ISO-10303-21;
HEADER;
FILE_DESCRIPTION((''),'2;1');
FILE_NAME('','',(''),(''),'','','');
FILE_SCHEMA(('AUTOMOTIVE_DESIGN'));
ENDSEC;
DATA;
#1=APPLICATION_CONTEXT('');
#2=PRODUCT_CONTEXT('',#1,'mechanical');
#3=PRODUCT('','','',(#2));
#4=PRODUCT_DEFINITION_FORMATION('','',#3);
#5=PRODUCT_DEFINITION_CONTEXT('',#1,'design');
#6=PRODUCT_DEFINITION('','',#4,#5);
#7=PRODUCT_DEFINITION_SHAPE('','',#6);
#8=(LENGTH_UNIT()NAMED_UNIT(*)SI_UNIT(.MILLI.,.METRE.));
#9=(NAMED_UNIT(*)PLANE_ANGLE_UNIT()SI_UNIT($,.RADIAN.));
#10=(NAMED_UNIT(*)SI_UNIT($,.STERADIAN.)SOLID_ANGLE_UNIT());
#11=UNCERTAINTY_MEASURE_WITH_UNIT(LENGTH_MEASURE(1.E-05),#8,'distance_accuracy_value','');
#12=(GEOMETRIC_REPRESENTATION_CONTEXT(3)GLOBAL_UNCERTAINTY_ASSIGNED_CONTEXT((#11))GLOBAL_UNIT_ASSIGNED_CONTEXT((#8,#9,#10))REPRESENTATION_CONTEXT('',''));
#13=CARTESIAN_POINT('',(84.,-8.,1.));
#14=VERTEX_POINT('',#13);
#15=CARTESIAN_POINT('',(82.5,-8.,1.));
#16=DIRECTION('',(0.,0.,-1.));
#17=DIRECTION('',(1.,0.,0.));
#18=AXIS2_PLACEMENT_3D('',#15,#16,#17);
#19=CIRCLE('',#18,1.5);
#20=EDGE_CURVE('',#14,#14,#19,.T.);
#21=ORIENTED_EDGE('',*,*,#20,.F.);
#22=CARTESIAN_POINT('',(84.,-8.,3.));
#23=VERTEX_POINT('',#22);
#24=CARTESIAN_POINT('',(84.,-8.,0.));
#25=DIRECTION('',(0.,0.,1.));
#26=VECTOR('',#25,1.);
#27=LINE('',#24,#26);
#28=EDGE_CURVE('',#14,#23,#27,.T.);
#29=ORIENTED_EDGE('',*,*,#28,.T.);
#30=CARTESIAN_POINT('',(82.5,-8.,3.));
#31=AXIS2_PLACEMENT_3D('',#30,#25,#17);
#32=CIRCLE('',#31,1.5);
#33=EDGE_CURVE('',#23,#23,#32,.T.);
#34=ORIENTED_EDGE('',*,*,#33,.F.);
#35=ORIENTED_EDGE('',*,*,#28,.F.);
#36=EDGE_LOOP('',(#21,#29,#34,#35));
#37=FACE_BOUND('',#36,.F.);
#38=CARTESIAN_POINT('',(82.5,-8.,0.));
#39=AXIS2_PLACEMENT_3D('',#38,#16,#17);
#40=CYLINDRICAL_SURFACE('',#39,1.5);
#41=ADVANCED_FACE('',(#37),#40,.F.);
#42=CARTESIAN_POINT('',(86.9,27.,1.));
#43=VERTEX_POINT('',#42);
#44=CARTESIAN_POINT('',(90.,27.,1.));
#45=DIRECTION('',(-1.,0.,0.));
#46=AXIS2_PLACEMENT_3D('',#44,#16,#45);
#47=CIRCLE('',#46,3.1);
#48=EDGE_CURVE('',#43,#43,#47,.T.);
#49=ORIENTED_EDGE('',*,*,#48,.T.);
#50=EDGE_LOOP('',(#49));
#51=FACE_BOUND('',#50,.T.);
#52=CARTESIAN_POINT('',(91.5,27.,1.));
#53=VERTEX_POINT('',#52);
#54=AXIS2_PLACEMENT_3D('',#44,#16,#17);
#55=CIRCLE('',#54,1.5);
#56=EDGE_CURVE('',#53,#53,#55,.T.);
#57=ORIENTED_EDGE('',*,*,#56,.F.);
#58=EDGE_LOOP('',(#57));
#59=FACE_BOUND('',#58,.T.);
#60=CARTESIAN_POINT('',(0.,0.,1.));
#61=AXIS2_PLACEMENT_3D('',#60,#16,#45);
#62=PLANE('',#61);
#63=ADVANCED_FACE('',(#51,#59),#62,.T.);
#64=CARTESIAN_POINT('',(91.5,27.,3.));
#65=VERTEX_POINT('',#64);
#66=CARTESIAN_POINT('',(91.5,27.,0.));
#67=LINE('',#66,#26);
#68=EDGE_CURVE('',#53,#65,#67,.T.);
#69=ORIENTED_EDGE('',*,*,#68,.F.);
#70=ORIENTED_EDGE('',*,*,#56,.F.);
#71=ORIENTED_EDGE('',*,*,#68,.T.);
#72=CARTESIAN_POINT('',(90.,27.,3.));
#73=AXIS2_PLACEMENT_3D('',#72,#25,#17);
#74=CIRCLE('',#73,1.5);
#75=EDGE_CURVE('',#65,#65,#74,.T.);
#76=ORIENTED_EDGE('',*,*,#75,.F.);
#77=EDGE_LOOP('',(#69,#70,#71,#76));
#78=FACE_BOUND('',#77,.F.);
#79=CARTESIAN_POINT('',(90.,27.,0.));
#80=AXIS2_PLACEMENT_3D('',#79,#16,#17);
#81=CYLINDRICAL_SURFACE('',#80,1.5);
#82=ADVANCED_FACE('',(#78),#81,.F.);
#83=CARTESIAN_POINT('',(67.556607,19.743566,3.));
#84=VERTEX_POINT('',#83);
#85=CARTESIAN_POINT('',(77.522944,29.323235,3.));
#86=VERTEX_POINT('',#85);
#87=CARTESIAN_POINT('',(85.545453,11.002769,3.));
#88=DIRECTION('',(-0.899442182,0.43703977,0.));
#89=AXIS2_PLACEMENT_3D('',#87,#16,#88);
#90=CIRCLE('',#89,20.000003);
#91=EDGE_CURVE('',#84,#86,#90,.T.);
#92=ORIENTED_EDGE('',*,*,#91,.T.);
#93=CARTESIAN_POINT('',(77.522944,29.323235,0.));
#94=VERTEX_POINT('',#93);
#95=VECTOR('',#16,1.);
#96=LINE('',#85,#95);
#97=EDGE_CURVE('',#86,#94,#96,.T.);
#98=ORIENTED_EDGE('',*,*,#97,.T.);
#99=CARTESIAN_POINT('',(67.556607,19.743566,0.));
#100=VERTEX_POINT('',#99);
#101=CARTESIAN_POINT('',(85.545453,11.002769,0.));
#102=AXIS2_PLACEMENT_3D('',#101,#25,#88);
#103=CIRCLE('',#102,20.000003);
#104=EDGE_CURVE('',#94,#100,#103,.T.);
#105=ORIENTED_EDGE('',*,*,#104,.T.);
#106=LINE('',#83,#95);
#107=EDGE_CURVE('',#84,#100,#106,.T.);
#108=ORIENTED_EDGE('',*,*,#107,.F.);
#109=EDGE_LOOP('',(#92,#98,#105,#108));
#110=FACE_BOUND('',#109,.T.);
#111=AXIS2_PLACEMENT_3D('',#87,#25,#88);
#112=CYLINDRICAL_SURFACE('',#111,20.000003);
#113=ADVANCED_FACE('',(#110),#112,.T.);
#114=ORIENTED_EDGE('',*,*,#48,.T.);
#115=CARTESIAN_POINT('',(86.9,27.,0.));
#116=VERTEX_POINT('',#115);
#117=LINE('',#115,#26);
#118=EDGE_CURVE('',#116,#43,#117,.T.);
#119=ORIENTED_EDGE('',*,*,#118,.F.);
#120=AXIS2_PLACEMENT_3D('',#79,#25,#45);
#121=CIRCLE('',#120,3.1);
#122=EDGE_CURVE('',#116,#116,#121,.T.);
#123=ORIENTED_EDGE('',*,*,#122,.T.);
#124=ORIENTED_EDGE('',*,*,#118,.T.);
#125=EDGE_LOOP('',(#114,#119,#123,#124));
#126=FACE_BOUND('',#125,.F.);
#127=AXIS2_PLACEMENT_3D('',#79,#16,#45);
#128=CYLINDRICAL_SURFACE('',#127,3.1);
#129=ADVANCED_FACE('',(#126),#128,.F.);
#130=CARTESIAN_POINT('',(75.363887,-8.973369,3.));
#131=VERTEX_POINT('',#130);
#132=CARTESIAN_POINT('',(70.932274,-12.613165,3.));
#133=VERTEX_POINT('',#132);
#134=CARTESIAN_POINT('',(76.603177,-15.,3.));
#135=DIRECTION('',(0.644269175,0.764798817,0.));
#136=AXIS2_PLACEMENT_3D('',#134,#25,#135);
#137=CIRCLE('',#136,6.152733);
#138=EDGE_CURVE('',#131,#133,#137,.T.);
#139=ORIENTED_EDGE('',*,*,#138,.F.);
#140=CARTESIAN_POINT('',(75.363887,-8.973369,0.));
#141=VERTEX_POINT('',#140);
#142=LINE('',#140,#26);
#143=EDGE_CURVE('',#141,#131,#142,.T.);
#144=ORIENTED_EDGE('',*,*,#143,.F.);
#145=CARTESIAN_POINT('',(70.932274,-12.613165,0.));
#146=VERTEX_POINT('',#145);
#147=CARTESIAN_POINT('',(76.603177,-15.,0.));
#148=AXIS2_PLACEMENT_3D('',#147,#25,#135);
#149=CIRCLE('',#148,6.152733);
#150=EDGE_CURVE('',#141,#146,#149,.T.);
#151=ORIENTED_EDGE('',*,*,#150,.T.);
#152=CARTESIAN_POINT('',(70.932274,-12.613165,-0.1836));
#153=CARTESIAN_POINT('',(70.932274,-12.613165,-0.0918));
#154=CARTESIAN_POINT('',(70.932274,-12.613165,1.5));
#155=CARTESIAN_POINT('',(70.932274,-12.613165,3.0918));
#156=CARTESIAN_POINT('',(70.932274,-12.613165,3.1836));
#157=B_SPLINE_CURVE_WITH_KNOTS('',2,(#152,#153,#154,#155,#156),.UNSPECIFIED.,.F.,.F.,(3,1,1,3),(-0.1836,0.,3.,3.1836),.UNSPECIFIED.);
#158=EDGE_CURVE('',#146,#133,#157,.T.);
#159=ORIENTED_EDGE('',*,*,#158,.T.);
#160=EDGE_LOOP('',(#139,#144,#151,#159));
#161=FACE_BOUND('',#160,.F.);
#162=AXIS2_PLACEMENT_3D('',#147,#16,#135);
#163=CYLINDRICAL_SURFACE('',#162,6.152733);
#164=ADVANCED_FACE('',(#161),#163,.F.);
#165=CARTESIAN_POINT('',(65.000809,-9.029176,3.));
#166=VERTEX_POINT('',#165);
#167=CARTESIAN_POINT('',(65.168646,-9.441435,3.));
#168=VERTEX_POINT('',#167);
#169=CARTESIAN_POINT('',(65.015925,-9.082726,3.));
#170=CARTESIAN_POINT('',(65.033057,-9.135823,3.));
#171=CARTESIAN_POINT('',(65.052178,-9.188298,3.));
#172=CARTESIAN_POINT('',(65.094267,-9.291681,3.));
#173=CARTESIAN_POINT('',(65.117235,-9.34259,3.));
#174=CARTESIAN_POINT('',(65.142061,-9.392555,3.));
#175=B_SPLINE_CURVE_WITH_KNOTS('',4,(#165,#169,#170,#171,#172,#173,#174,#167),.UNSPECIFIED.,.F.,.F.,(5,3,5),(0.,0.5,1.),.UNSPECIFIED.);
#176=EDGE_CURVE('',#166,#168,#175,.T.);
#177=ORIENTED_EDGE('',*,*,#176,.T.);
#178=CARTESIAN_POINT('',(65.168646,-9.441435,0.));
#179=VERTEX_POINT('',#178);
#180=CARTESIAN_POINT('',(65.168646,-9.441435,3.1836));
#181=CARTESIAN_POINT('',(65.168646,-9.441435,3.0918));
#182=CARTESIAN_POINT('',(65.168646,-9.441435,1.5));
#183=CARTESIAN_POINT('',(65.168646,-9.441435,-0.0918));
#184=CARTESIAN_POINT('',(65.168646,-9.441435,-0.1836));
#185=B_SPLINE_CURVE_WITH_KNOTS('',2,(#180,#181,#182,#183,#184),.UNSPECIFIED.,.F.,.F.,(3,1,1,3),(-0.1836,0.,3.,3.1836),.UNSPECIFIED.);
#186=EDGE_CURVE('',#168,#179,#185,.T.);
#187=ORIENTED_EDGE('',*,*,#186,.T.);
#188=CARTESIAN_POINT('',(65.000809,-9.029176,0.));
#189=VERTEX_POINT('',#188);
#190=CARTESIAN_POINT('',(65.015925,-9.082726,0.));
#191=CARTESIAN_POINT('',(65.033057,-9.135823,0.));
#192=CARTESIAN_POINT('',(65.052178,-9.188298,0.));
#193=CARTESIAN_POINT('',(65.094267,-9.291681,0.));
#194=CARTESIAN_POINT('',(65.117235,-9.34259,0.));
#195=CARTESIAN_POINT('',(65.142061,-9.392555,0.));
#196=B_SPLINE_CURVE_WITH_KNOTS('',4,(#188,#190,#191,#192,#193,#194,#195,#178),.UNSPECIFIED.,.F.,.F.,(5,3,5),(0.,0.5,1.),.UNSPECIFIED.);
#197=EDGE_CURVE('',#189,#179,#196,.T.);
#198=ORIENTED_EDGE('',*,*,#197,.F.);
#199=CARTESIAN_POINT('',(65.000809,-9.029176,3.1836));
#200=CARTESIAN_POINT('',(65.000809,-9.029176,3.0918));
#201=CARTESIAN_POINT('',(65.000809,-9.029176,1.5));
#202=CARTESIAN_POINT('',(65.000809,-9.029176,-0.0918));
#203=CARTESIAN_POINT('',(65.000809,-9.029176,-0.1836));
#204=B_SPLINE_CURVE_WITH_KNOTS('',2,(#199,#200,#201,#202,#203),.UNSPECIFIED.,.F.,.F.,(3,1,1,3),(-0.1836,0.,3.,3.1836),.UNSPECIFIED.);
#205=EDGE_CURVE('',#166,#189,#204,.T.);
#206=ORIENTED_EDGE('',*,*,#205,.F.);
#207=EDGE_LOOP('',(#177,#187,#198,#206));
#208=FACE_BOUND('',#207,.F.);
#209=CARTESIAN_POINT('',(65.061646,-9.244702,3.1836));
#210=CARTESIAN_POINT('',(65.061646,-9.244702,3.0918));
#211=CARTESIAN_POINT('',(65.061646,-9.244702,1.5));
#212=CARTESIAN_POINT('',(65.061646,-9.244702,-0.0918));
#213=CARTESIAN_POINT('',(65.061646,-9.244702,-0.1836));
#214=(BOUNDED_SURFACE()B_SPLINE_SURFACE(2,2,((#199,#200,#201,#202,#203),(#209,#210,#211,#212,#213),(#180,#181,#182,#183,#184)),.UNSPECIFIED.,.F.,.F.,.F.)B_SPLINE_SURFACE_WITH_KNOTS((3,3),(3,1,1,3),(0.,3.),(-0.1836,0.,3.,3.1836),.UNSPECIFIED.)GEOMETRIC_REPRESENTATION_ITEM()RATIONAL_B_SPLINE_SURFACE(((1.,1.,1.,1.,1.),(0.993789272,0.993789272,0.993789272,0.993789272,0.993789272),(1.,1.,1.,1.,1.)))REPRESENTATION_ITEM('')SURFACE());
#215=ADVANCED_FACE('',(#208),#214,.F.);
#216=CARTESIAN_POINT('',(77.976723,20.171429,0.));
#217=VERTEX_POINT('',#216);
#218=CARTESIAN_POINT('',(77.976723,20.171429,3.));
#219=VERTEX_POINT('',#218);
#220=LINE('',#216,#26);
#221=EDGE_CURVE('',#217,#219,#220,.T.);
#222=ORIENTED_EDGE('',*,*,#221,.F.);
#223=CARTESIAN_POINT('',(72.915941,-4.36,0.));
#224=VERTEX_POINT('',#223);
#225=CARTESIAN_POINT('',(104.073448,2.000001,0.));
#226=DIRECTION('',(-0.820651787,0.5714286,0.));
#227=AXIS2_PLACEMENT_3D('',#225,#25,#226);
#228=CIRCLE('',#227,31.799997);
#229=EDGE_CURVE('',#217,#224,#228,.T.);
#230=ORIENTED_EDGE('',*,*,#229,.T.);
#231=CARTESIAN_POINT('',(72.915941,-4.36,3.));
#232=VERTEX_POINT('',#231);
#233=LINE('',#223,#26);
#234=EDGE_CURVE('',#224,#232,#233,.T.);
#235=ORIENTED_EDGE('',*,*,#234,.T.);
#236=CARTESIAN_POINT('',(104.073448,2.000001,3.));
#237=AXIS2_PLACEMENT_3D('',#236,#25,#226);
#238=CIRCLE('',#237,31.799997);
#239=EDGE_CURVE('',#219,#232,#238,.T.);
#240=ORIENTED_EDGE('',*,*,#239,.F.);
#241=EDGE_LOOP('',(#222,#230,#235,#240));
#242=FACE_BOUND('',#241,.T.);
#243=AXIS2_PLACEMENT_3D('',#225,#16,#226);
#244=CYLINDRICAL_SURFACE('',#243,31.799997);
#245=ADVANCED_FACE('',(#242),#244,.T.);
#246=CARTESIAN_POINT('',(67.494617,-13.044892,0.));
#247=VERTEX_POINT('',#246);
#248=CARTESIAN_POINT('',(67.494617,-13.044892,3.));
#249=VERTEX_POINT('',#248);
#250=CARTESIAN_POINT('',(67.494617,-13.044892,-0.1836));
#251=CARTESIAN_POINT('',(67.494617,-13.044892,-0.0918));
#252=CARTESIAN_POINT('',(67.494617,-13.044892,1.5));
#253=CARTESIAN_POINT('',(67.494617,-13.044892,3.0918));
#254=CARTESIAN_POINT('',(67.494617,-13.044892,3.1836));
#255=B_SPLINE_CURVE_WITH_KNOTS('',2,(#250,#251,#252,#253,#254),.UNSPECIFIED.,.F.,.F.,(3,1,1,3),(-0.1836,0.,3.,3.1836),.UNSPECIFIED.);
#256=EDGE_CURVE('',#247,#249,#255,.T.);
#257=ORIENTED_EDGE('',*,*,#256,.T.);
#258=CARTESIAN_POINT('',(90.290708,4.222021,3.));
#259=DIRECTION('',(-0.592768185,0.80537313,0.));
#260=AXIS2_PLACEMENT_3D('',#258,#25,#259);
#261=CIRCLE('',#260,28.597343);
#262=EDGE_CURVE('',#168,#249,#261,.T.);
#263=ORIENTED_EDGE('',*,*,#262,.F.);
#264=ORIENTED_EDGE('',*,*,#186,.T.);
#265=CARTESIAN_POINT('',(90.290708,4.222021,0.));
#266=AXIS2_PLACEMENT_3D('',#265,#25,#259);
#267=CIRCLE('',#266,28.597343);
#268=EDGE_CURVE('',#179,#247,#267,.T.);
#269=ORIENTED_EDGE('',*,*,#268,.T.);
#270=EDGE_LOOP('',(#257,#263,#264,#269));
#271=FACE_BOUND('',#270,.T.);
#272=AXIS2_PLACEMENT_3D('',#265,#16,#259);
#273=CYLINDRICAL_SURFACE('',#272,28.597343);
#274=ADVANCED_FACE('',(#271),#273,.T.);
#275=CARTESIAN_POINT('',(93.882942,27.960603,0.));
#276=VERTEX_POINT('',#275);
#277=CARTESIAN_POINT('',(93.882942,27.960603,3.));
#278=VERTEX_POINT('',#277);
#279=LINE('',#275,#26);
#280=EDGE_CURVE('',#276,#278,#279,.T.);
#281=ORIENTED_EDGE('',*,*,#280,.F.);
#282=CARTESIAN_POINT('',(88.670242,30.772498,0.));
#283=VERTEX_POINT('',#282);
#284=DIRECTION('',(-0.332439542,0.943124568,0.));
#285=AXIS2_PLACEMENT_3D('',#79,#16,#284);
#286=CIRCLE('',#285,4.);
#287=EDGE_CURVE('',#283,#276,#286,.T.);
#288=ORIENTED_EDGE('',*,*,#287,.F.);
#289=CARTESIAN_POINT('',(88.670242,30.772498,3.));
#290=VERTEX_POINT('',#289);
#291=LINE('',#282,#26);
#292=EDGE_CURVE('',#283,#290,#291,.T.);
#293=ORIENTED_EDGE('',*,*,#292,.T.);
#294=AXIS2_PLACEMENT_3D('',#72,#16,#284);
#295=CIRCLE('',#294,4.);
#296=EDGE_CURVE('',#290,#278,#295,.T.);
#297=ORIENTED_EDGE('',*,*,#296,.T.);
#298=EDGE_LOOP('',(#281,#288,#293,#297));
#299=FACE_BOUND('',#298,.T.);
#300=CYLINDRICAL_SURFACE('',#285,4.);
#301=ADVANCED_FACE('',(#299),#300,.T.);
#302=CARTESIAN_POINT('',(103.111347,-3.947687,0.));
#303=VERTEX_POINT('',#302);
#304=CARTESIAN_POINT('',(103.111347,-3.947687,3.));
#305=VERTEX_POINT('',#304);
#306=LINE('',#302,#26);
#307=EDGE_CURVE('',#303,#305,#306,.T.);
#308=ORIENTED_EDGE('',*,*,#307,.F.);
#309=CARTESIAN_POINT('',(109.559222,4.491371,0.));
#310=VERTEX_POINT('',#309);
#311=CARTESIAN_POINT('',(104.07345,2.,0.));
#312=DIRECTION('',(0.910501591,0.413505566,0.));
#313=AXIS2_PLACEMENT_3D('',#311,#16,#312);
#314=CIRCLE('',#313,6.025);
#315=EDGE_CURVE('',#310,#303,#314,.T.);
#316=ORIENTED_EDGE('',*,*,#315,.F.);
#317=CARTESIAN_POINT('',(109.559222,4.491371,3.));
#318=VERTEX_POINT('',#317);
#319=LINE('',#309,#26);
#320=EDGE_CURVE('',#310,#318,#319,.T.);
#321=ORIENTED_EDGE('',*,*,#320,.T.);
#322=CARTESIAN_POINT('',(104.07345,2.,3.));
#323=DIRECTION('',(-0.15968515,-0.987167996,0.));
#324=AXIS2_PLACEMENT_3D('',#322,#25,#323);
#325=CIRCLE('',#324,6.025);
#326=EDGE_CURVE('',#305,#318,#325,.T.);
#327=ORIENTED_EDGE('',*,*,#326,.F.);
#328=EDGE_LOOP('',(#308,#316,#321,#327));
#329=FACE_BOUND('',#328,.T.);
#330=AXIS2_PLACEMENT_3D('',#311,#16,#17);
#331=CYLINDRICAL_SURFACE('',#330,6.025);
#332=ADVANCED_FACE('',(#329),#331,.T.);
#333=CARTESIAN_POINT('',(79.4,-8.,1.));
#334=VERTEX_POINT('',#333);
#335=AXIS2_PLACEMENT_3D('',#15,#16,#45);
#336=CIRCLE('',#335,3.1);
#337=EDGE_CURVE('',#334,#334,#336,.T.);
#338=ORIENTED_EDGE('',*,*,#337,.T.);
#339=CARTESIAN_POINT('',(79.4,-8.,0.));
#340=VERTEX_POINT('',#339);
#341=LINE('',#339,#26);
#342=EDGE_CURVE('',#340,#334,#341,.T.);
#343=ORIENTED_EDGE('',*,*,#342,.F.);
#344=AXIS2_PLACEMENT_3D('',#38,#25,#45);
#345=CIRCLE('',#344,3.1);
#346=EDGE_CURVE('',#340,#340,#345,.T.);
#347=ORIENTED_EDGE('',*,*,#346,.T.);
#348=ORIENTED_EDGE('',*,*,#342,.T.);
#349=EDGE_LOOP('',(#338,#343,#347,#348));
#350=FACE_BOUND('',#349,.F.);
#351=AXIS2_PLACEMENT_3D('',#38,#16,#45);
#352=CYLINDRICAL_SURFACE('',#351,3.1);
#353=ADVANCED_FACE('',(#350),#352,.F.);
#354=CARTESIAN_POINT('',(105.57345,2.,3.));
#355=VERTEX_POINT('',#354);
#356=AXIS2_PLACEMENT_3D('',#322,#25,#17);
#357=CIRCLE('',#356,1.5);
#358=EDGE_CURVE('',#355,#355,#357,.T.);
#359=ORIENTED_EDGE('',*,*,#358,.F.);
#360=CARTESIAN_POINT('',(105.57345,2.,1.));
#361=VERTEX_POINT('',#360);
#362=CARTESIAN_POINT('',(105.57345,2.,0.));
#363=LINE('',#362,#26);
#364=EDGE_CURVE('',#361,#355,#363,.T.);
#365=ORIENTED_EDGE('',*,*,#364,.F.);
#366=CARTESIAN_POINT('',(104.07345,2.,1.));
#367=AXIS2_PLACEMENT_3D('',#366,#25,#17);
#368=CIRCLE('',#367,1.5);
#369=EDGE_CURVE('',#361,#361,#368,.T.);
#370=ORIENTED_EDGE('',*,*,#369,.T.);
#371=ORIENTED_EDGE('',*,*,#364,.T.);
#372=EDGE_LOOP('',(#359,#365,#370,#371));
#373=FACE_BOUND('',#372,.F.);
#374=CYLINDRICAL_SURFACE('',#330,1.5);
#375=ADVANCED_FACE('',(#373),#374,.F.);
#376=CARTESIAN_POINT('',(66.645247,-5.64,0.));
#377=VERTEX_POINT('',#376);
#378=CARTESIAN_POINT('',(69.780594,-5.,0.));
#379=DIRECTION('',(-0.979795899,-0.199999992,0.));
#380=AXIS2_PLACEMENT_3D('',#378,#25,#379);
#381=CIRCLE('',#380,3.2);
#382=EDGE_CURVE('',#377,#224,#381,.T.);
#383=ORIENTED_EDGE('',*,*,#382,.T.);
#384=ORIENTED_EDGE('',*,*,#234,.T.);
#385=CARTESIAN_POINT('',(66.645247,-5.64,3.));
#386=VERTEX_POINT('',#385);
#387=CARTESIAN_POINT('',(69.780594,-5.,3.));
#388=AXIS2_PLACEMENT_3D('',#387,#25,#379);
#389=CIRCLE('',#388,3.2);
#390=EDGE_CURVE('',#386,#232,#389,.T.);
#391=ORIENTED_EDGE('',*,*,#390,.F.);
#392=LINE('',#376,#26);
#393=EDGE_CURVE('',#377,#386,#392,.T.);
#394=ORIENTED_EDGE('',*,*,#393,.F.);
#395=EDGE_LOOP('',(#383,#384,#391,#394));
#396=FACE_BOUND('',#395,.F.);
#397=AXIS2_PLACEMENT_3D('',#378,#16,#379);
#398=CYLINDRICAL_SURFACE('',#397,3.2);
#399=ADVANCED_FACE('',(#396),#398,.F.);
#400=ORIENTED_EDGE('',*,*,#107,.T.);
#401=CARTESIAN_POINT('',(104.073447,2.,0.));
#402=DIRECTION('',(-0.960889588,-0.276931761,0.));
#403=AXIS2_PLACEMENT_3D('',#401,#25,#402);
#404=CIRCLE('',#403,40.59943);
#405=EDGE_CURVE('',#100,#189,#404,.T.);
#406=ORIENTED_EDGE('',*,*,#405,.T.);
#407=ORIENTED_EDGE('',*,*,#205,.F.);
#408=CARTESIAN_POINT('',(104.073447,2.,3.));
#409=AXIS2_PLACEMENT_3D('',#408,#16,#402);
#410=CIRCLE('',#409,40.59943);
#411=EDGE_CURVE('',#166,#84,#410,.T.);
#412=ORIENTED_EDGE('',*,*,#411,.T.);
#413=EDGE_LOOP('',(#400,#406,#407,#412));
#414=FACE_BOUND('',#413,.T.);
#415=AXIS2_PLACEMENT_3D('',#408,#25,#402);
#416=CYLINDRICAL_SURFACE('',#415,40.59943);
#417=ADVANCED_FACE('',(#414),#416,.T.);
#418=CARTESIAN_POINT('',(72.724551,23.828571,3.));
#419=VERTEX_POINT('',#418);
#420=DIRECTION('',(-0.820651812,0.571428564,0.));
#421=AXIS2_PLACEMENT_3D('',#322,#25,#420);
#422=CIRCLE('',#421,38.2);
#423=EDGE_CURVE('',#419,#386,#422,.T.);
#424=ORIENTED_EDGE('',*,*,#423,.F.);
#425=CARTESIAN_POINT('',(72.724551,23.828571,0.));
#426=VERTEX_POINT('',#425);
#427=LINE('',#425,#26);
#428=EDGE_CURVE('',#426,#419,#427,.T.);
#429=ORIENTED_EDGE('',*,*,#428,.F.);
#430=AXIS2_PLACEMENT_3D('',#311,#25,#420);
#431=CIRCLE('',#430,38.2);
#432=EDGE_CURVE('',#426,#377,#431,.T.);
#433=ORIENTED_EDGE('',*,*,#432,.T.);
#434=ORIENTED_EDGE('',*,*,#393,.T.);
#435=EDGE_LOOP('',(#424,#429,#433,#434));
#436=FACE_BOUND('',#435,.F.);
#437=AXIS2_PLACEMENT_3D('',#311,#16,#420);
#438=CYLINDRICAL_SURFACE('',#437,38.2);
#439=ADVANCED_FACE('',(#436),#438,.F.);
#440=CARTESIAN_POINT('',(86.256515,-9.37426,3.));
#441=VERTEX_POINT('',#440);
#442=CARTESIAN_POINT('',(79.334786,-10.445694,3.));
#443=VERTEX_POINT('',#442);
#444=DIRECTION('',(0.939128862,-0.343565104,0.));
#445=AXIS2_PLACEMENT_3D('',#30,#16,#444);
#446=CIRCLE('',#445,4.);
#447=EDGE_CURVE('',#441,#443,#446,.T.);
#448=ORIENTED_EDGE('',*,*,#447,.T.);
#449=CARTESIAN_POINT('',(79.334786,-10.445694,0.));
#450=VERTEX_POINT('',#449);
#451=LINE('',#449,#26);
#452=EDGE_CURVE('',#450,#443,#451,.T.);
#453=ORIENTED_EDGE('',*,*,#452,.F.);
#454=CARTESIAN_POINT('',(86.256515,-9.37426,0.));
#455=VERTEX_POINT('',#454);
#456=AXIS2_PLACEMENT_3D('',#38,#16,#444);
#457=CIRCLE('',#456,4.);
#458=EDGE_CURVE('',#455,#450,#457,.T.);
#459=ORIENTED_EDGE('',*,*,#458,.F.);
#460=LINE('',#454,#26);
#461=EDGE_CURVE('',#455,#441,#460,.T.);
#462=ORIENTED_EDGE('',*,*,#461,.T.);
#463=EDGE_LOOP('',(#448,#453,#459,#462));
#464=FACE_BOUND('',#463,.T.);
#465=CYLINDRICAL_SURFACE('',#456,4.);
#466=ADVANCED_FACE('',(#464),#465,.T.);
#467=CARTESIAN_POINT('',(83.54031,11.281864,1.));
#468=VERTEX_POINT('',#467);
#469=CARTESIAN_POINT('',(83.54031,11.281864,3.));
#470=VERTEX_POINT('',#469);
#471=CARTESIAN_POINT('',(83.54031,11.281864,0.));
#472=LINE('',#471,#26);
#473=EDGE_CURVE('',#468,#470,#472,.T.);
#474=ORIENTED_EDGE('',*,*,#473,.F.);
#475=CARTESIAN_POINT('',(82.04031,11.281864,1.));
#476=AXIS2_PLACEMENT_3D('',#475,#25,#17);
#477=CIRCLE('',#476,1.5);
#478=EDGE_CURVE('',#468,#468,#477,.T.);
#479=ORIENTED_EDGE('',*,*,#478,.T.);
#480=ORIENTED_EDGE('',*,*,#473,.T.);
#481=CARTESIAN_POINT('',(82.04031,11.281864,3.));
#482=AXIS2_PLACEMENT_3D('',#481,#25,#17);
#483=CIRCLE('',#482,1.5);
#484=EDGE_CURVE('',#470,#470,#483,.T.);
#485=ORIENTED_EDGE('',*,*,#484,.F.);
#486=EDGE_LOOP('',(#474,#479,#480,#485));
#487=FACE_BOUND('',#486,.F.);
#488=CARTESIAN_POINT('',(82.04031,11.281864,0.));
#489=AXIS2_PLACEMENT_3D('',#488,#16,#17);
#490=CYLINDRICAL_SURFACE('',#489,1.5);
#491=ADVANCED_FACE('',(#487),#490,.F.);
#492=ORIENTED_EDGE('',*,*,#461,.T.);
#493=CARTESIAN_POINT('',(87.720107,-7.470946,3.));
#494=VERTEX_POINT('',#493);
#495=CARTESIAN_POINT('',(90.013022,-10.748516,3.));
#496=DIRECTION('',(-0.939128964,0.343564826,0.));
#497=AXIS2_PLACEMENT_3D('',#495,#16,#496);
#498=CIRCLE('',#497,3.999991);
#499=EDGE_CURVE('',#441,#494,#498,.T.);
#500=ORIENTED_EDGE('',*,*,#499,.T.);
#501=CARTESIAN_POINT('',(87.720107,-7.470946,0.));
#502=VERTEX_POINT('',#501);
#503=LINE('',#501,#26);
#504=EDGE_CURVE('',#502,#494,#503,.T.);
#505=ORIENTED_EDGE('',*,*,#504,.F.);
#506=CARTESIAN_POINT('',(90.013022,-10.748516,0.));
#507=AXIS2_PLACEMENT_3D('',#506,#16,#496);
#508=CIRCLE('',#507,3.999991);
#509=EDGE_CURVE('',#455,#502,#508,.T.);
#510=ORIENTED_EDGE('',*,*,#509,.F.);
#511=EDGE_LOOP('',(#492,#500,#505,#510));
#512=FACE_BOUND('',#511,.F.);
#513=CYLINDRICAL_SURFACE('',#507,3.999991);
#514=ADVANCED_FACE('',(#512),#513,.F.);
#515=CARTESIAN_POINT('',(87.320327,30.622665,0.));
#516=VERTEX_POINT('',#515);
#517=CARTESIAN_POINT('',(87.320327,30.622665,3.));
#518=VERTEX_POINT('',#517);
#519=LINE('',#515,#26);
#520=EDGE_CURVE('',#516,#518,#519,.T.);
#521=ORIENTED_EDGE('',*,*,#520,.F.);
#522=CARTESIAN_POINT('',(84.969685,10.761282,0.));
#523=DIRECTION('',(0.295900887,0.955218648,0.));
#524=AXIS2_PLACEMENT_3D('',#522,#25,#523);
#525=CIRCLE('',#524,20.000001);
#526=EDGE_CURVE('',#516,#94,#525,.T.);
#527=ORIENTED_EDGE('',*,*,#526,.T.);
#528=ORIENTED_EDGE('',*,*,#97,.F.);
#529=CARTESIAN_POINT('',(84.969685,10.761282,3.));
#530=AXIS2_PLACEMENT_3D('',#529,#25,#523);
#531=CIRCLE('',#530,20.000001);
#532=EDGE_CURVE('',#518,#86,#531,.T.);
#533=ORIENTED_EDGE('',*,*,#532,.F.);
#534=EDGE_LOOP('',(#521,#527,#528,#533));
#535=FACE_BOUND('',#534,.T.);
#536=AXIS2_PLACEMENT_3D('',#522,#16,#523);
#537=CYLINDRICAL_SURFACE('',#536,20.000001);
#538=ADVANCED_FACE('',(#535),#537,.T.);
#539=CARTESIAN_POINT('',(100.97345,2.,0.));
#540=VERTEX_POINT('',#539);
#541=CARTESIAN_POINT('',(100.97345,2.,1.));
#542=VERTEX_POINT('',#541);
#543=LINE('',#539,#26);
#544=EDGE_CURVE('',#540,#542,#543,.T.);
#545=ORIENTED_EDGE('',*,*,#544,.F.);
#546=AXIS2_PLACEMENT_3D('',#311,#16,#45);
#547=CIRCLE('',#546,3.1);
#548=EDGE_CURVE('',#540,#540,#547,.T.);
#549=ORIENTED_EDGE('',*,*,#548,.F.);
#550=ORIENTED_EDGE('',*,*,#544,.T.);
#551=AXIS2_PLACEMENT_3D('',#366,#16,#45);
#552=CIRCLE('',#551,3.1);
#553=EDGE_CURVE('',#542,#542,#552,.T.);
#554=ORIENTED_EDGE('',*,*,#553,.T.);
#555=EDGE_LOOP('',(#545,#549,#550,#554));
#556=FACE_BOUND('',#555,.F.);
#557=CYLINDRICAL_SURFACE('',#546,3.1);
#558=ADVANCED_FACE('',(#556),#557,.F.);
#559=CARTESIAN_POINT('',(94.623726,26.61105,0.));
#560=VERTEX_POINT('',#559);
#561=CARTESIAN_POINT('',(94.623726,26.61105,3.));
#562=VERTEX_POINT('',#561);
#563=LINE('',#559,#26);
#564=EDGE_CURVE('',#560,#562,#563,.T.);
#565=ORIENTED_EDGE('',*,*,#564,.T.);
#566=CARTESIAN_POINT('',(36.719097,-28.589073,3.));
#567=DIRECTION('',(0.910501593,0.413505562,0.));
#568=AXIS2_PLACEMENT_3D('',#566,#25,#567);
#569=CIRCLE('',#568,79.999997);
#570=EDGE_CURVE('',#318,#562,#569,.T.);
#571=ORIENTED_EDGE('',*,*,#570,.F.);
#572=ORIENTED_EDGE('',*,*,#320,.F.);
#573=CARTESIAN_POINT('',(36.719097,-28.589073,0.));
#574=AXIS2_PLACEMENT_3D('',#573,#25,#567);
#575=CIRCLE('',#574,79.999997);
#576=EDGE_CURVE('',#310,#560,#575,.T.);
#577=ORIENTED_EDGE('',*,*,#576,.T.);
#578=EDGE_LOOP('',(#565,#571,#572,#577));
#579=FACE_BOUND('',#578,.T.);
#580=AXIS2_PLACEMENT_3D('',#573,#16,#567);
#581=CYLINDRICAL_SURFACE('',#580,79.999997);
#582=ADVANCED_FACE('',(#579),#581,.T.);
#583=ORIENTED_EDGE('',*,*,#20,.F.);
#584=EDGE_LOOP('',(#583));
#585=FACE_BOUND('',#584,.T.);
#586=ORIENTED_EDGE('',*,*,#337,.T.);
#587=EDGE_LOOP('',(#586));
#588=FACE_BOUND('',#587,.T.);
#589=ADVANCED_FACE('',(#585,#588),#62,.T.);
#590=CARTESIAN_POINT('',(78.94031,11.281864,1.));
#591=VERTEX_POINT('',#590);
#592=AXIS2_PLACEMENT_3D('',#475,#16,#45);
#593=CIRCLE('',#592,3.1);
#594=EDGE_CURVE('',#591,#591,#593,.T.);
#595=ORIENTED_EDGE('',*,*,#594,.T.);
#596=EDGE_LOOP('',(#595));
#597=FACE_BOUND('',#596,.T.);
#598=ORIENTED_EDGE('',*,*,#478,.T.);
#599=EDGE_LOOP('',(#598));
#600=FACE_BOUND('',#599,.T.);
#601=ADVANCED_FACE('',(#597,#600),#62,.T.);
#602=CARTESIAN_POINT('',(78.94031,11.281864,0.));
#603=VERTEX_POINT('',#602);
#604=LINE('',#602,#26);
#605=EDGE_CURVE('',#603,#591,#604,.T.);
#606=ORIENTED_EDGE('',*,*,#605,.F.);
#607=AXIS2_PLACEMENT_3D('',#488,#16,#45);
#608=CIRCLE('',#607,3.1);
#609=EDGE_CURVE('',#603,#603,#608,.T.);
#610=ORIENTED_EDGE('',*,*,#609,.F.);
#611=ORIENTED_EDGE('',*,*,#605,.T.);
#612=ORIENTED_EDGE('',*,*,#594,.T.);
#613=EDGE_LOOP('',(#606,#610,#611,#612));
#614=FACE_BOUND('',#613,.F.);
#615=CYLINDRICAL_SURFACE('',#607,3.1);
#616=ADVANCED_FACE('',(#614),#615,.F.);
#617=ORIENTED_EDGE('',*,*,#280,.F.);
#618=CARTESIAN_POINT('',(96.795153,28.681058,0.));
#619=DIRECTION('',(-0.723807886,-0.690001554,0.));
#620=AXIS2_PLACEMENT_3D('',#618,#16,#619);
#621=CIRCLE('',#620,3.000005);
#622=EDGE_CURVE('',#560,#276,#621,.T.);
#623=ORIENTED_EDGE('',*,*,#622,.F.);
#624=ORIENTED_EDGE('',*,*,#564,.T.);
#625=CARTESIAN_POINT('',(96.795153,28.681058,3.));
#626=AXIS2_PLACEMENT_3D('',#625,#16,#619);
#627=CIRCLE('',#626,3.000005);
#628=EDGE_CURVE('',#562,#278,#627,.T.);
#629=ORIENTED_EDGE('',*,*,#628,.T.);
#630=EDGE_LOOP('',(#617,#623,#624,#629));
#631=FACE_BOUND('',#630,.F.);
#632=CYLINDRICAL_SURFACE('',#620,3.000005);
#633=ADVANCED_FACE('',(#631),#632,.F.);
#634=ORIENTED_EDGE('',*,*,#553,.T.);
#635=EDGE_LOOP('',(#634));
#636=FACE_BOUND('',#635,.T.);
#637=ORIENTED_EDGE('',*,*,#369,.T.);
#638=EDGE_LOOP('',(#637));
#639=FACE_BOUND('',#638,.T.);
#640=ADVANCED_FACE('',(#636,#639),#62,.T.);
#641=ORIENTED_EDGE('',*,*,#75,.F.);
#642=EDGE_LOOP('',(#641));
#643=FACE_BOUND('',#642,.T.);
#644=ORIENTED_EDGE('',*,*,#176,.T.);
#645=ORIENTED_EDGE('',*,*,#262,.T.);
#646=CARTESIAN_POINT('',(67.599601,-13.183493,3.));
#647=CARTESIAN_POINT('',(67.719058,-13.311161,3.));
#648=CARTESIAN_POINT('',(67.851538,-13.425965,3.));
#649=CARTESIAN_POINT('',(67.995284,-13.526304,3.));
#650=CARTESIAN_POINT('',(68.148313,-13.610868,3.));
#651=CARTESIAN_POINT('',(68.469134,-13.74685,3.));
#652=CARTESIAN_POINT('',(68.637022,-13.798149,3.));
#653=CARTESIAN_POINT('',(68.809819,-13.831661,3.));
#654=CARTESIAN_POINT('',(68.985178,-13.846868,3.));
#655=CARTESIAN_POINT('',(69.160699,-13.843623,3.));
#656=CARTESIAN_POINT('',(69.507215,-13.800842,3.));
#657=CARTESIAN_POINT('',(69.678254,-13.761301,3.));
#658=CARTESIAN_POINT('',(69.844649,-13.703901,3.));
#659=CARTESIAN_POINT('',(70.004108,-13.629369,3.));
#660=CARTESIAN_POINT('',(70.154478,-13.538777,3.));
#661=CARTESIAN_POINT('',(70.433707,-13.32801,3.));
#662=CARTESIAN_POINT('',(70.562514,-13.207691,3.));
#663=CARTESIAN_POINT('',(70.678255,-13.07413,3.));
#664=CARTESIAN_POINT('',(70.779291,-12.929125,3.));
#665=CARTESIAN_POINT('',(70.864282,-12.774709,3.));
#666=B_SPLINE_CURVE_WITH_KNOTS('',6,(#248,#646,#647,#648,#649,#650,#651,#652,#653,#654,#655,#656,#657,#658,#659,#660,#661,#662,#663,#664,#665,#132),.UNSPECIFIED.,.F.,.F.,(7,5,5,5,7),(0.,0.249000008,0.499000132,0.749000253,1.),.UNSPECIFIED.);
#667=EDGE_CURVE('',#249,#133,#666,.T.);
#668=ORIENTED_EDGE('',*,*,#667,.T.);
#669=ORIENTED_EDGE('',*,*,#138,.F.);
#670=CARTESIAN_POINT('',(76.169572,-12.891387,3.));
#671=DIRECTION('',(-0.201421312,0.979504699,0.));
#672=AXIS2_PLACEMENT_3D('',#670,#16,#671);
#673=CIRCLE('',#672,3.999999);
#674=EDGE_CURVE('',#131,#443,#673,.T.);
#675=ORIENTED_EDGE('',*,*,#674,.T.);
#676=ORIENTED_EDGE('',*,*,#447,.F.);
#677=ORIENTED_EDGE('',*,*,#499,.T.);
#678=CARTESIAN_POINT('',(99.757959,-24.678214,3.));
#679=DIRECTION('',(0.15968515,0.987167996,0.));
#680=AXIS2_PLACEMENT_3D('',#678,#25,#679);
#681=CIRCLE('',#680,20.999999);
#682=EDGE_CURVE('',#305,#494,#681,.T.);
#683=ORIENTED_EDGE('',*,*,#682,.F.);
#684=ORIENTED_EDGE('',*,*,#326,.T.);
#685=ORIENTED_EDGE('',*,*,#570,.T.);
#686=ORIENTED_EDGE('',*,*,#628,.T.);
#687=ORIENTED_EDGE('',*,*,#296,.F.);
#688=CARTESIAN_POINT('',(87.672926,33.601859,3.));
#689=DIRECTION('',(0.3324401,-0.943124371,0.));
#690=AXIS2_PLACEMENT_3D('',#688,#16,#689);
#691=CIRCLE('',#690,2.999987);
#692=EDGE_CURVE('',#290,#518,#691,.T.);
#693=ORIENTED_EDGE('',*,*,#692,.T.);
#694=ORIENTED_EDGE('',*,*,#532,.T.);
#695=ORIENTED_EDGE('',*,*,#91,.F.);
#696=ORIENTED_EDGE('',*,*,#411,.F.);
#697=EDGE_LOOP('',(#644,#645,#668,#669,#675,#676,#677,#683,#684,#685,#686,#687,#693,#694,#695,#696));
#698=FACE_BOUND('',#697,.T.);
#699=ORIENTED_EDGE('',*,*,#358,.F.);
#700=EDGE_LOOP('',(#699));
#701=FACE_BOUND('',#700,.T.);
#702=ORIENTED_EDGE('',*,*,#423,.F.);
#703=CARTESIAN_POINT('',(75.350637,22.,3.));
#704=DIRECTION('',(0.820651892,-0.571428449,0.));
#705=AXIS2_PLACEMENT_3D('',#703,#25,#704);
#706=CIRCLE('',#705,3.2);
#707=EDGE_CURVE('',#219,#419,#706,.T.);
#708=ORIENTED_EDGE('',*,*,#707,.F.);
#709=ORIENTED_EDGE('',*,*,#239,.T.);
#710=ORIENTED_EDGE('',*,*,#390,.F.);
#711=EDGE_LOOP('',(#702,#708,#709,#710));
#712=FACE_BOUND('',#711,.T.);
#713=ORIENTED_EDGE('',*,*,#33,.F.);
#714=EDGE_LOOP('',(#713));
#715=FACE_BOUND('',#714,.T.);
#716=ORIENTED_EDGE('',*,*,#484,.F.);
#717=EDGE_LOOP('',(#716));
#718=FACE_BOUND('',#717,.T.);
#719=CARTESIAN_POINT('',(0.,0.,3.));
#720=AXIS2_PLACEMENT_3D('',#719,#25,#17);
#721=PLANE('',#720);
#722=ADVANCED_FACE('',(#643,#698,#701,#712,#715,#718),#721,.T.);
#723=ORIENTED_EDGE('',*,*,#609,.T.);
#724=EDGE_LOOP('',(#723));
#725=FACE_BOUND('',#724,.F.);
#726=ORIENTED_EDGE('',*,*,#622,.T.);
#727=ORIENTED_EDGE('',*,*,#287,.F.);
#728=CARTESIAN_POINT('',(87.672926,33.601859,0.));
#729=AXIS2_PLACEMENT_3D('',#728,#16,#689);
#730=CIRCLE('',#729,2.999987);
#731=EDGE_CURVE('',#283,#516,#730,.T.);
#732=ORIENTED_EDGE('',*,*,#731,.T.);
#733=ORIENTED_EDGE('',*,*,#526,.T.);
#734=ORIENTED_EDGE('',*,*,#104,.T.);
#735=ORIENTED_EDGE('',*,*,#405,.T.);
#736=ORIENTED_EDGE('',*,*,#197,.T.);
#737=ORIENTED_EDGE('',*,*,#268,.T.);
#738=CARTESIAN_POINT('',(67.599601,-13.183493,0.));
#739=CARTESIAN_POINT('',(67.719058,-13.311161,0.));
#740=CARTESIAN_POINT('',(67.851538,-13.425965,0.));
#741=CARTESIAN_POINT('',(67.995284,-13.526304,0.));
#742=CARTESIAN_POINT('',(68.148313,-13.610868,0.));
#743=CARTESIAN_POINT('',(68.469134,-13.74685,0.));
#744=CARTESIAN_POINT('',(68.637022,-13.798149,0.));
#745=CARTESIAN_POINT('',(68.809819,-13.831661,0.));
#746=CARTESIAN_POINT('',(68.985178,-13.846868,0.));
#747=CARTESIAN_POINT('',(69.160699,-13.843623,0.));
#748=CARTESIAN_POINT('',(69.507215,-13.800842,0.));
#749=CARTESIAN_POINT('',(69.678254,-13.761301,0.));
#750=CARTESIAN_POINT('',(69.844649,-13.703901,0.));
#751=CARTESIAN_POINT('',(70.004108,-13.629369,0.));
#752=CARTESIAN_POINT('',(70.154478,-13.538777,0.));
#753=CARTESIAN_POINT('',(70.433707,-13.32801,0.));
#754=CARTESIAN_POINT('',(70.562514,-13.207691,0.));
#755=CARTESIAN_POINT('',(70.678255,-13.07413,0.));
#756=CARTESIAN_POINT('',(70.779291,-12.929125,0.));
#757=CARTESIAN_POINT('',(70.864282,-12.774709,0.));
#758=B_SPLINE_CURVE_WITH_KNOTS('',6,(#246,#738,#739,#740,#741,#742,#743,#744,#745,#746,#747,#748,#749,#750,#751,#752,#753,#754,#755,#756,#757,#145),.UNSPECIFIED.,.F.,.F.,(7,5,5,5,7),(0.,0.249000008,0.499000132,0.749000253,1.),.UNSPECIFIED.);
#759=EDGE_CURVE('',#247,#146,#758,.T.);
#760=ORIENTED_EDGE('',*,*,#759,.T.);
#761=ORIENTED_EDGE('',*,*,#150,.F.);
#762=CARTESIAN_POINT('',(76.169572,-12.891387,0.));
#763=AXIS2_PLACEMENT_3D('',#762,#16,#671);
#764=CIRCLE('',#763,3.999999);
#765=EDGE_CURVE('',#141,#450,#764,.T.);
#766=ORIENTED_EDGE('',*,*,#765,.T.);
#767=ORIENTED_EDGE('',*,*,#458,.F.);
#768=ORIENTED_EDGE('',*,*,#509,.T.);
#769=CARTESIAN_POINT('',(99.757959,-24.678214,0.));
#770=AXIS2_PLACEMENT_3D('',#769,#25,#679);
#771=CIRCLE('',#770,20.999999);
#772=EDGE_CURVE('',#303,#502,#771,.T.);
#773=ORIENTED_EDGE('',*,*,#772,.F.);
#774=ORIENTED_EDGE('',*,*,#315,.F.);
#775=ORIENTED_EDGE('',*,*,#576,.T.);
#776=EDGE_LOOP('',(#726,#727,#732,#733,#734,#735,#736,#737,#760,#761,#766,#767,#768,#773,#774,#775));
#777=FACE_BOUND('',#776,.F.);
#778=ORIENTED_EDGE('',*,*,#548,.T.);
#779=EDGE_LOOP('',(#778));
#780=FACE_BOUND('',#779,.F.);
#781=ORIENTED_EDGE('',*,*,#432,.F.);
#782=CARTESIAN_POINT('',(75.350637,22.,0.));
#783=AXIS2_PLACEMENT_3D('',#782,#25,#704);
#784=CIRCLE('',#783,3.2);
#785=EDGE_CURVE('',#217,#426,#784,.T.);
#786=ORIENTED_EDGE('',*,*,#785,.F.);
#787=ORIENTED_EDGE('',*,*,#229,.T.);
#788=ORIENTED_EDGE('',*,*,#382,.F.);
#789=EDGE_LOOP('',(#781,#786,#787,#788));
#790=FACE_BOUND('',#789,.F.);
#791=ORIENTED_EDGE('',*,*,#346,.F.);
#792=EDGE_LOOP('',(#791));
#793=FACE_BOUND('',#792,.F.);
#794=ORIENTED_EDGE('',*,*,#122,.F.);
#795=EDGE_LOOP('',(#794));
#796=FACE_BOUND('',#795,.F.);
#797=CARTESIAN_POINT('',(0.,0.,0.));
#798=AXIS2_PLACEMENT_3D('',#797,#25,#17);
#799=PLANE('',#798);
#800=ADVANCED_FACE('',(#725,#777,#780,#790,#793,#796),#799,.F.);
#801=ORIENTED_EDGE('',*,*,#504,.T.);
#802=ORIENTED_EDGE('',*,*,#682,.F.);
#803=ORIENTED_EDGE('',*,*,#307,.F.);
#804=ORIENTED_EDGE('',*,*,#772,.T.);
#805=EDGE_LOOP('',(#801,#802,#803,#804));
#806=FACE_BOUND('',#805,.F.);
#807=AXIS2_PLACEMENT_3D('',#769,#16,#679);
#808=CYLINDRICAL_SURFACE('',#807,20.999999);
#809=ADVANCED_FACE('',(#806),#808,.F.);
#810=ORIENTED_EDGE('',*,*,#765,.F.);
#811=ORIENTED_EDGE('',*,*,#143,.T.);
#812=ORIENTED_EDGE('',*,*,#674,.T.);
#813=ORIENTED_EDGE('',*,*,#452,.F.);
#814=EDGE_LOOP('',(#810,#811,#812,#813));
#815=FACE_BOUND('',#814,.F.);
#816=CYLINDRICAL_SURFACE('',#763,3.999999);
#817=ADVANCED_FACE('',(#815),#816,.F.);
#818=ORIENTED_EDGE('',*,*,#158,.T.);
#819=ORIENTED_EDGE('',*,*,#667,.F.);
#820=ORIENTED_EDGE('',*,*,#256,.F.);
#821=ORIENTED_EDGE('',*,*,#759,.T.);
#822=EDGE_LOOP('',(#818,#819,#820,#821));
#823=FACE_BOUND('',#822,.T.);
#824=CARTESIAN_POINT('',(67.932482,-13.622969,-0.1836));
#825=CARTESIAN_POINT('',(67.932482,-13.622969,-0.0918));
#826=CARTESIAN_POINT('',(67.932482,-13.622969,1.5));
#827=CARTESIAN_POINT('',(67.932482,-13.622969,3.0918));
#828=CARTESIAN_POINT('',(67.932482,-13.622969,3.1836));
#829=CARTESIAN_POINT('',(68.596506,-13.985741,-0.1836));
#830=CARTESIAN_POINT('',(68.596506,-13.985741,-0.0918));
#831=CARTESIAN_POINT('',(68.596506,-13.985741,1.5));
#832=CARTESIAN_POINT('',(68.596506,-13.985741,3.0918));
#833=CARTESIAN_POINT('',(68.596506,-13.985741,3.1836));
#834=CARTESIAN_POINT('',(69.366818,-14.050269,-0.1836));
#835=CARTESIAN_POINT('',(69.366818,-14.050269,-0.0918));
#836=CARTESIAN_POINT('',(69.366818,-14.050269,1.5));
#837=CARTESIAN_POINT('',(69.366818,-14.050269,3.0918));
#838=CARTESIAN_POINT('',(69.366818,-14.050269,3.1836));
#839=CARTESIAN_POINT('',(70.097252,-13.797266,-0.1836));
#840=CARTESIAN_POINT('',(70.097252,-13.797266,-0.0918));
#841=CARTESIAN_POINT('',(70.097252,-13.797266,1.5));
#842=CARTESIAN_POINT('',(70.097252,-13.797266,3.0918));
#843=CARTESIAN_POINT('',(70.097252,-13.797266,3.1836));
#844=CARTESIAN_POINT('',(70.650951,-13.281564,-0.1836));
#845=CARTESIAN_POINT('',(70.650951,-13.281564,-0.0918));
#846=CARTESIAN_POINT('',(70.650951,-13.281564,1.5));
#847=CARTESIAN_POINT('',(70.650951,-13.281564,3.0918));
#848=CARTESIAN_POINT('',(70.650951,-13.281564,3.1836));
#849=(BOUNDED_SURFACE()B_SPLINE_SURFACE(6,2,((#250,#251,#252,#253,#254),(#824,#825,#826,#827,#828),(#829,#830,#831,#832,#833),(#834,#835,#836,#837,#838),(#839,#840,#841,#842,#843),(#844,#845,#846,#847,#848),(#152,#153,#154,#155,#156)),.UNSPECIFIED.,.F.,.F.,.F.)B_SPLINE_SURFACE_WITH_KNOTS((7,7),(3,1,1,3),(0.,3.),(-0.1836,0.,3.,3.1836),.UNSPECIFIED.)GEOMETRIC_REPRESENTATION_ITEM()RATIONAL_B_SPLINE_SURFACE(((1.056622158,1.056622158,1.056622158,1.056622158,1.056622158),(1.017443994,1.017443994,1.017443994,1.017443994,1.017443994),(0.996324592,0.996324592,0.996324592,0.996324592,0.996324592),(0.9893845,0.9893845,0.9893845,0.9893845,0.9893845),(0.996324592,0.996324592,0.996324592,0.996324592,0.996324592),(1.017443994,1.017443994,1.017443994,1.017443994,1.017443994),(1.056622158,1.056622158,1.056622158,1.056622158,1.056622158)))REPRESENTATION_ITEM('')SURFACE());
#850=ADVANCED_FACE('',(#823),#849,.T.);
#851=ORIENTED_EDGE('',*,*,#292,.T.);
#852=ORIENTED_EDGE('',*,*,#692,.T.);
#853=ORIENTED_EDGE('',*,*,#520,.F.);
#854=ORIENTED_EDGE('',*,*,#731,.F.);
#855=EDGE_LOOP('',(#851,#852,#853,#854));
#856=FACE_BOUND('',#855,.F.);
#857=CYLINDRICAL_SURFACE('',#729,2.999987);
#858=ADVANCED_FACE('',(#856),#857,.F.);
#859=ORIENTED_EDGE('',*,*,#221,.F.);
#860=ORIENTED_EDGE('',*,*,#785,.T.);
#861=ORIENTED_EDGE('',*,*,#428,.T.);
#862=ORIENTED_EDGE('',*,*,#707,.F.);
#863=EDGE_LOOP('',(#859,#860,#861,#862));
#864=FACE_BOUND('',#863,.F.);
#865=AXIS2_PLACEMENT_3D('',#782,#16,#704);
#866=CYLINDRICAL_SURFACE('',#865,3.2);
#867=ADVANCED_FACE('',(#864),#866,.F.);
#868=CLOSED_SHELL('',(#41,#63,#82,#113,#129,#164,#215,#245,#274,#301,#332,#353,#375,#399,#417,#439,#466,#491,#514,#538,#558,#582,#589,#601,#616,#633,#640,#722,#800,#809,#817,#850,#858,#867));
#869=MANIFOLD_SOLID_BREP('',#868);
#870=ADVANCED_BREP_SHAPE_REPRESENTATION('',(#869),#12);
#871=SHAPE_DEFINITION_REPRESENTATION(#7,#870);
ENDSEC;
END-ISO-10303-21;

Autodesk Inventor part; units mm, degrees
ref_plane "YZ Plane" through (0, 0, 0) normal (1, 0, 0) x (0, 1, 0)
ref_plane "XZ Plane" through (0, 0, 0) normal (0, 1, 0) x (-1, 0, 0)
ref_plane "XY Plane" through (0, 0, 0) normal (0, 0, 1) x (1, 0, 0)
sketch "スケッチ1" plane through (0, 0, 0) normal (0, 0, 1) x (1, 0, 0)
  line L0 (108, 72.831817) -> (108, -27.637331) construction
  circle A0 centre (90, 27) radius 3
  circle A1 centre (104.07345, 2) radius 6.025
  circle A2 centre (90, 27) radius 1.5
  circle A3 centre (104.07345, 2) radius 1.5
  circle A4 centre (82.04031, 11.281864) radius 1.5
  circle A5 centre (82.5, -8) radius 3
  circle A6 centre (82.5, -8) radius 1.5
  arc A7 (66.645247, -5.64) -> (72.915941, -4.36) centre (69.780594, -5) ccw
  arc A8 (72.724551, 23.828571) -> (66.645247, -5.64) centre (104.07345, 2) ccw
  arc A9 (77.976723, 20.171429) -> (72.915941, -4.36) centre (104.07345, 2) ccw
  arc A10 (77.976723, 20.171429) -> (72.724551, 23.828571) centre (75.350637, 22) ccw
  circle A11 centre (137.322151, 20) radius 1.25
  circle A12 centre (133.5, -8) radius 3
  circle A13 centre (133.5, -8) radius 1.5
  circle A14 centre (146, 10) radius 1.5
  arc A15 (-6.089587, 13.373015) -> (73.990447, 1.93301) centre (42.288654, 66.020578) ccw construction
  line L1 (108, 72.831817) -> (108, -27.637331) construction
  arc A16 (142.009553, 1.93301) -> (222.089587, 13.373015) centre (173.711346, 66.020578) ccw construction
  arc A17 (142.29705, -19.072921) -> (142.660887, 27.253552) centre (125.709293, 4.222021) ccw
  arc A18 (136.80781, 35.127338) -> (180.06622, 10.718677) centre (180.861669, 62.665248) ccw
  circle A19 centre (137.322151, 20) radius 9.006449
  arc A20 (128.322651, 20.353731) -> (130.555913, -8.5765) centre (253.226204, 15.444317) ccw
  arc A21 (133.414591, -10.998784) -> (152.948723, -4.485529) centre (134.268683, 18.989056) ccw
  arc A22 (35.93378, 10.718677) -> (79.19219, 35.127338) centre (35.138331, 62.665248) ccw
  arc A23 (73.339113, 27.253552) -> (73.70295, -19.072921) centre (90.290707, 4.222021) ccw
  arc A24 (90.887703, 29.865656) -> (71.118535, 25.188537) centre (84.969685, 10.761283) ccw
  arc A25 (109.559222, 4.491371) -> (92.075879, 29.165808) centre (36.719095, -28.589074) ccw
  arc A26 (80.567193, -10.294397) -> (70.653319, -16.566942) centre (76.603177, -15) ccw
  circle A27 centre (76.603177, -15) radius 5 construction
  circle A28 centre (94, -11) radius 1.5
  circle A29 centre (94, -11) radius 3
  arc A30 (103.111347, -3.947687) -> (84.657245, -10.084777) centre (99.757959, -24.678215) ccw
  point P0 (0, 0)
  point P1 (0, 0)
  point P2 (153.490711, -2.560367)
  point P3 (70.420594, -8.135347)
  point P4 (68.814065, 23.104865)
  dimension "d0" = 2
  dimension "d1" = 30
  dimension "d2" = 125
  dimension "d3" = 80
  dimension "d4" = 20
  dimension "d5" = 6
  dimension "d6" = 21
extrude "押し出し1" add sketch "スケッチ1" along normal blind 3 contours A0 | A0 A25 A1 A30 A5 A26 A23 A22 A24 | A1 | A5
fillet "フィレット1" radius 5 1 edges at (68.8141, 23.1049, 1.5)
fillet "フィレット2" radius 2 1 edges at (70.6533, -16.5669, 1.5)
sketch "スケッチ2" plane through (0, 0, 0) normal (0, 0, -1) x (-1, 0, 0)
  circle A0 centre (-82.04031, 11.281864) radius 1.5
  arc A1 (-70.932275, -12.613165) -> (-67.494617, -13.044892) centre (-69.088898, -11.837303) ccw
  arc A2 (-67.494617, -13.044892) -> (-68.54743, 22.797215) centre (-90.290707, 4.222021) ccw
  arc A3 (-68.54743, 22.797215) -> (-69.082243, 23.334729) centre (-72.349055, 19.549502) ccw
  arc A4 (-71.118535, 25.188537) -> (-69.082243, 23.334729) centre (-35.138331, 62.665248) ccw
  arc A5 (-71.118535, 25.188537) -> (-90.887703, 29.865656) centre (-84.969685, 10.761283) ccw
  arc A6 (-90.887703, 29.865656) -> (-92.075879, 29.165808) centre (-90, 27) ccw
  arc A7 (-92.075879, 29.165808) -> (-109.559222, 4.491371) centre (-36.719095, -28.589074) ccw
  arc A8 (-109.559222, 4.491371) -> (-103.111347, -3.947687) centre (-104.07345, 2) ccw
  arc A9 (-84.657245, -10.084777) -> (-103.111347, -3.947687) centre (-99.757959, -24.678215) ccw
  arc A10 (-84.657245, -10.084777) -> (-80.567193, -10.294397) centre (-82.5, -8) ccw
  arc A11 (-70.932275, -12.613165) -> (-80.567193, -10.294397) centre (-76.603177, -15) ccw
  circle A12 centre (-82.5, -8) radius 1.5
  circle A13 centre (-104.07345, 2) radius 1.5
  circle A14 centre (-90, 27) radius 1.5
  circle A15 centre (-82.04031, 11.281864) radius 1.5
  arc A16 (-72.724551, 23.828571) -> (-77.976723, 20.171429) centre (-75.350637, 22) ccw
  arc A17 (-66.645247, -5.64) -> (-72.724551, 23.828571) centre (-104.07345, 2) ccw
  arc A18 (-72.915941, -4.36) -> (-66.645247, -5.64) centre (-69.780594, -5) ccw
  arc A19 (-72.915941, -4.36) -> (-77.976723, 20.171429) centre (-104.07345, 2) ccw
  circle A20 centre (-90, 27) radius 3.1
  circle A21 centre (-82.04031, 11.281864) radius 3.1
  circle A22 centre (-104.07345, 2) radius 3.1
  circle A23 centre (-82.5, -8) radius 3.1
  arc A24 (-86.256515, -9.37426) -> (-87.720107, -7.470946) centre (-90.013031, -10.748521) ccw
  arc A25 (-86.256515, -9.37426) -> (-79.334786, -10.445694) centre (-82.5, -8) ccw
  arc A26 (-75.363887, -8.973369) -> (-79.334786, -10.445694) centre (-76.169572, -12.891388) ccw
  arc A27 (-70.932275, -12.613165) -> (-80.567193, -10.294397) centre (-76.603177, -15) ccw
  arc A28 (-94.623726, 26.61105) -> (-93.882942, 27.960603) centre (-96.795149, 28.681055) ccw
  arc A29 (-88.670242, 30.772498) -> (-93.882942, 27.960603) centre (-90, 27) ccw
  arc A30 (-88.670242, 30.772498) -> (-87.320327, 30.622665) centre (-87.672923, 33.601872) ccw
  point P0 (0, 0)
  dimension "d11" = 6.2
  dimension "d12" = 6.2
  dimension "d13" = 6.2
  dimension "d14" = 6.2
  dimension "d15" = 4
  dimension "d16" = 4
  dimension "d17" = 4
  dimension "d18" = 4
  dimension "d19" = 3
  dimension "d20" = 3
extrude "押し出し2" add sketch "スケッチ2" against normal up to surface (3 mm away) contours A26 A25 A24 A9 A23 A11 | A23 A9 A10 A11 | A5 A20 A7 A28 A29 A30 | A5 A6 A7 A20 picked at (-81.994217, -10.979131) picked at (-91.467973, 29.678904)
extrude "押し出し3" cut sketch "スケッチ2" against normal blind 1 contours A23 A9 A10 A11 | A11 A10 A9 A23 | A20 A7 A6 A5 | A5 A6 A7 A20 | A12 | A14 | A21 | A22
sketch "スケッチ4" plane through (0, 0, 3) normal (0, 0, 1) x (1, 0, 0)
  arc A0 (67.494617, -13.044892) -> (70.932275, -12.613165) centre (69.088898, -11.837303) ccw
  arc A1 (75.363887, -8.973369) -> (70.932275, -12.613165) centre (76.603177, -15) ccw
  arc A2 (79.334786, -10.445694) -> (75.363887, -8.973369) centre (76.169572, -12.891388) ccw
  arc A3 (79.334786, -10.445694) -> (86.256515, -9.37426) centre (82.5, -8) ccw
  arc A4 (87.720107, -7.470946) -> (86.256515, -9.37426) centre (90.013031, -10.748521) ccw
  arc A5 (103.111347, -3.947687) -> (87.720107, -7.470946) centre (99.757959, -24.678215) ccw
  arc A6 (103.111347, -3.947687) -> (109.559222, 4.491371) centre (104.07345, 2) ccw
  arc A7 (109.559222, 4.491371) -> (94.623726, 26.61105) centre (36.719095, -28.589074) ccw
  arc A8 (93.882942, 27.960603) -> (94.623726, 26.61105) centre (96.795149, 28.681055) ccw
  arc A9 (93.882942, 27.960603) -> (88.670242, 30.772498) centre (90, 27) ccw
  arc A10 (87.320327, 30.622665) -> (88.670242, 30.772498) centre (87.672923, 33.601872) ccw
  arc A11 (87.320327, 30.622665) -> (71.118535, 25.188537) centre (84.969685, 10.761283) ccw
  arc A12 (69.082243, 23.334729) -> (71.118535, 25.188537) centre (35.138331, 62.665248) ccw
  arc A13 (69.082243, 23.334729) -> (68.54743, 22.797215) centre (72.349055, 19.549502) ccw
  arc A14 (68.54743, 22.797215) -> (67.494617, -13.044892) centre (90.290707, 4.222021) ccw
  circle A15 centre (82.5, -8) radius 1.5
  circle A16 centre (104.07345, 2) radius 1.5
  circle A17 centre (90, 27) radius 1.5
  circle A18 centre (82.04031, 11.281864) radius 1.5
  arc A19 (77.976723, 20.171429) -> (72.724551, 23.828571) centre (75.350637, 22) ccw
  arc A20 (77.976723, 20.171429) -> (72.915941, -4.36) centre (104.07345, 2) ccw
  arc A21 (66.645247, -5.64) -> (72.915941, -4.36) centre (69.780594, -5) ccw
  arc A22 (72.724551, 23.828571) -> (66.645247, -5.64) centre (104.07345, 2) ccw
  arc A23 (70.112674, 24.248139) -> (65.061877, -9.243272) centre (104.07345, 2) ccw
  arc A24 (72.724551, 23.828571) -> (66.645247, -5.64) centre (104.07345, 2) ccw
  arc A25 (77.522944, 29.323235) -> (67.556607, 19.743566) centre (85.545451, 11.002771) ccw
  point P0 (0, 0)
  dimension "d28" = 20
sketch "スケッチ4 outline for 押し出し4" plane through (0, 0, 3) normal (0, 0, 1) x (1, 0, 0)
  arc A0 (69.082243, 23.334729) -> (68.54743, 22.797215) centre (72.349055, 19.549502) ccw
  arc A1 (68.54743, 22.797215) -> (65.061877, -9.243272) centre (90.290707, 4.222021) ccw
  arc A2 (65.061877, -9.243272) -> (67.556607, 19.743566) centre (104.07345, 2) cw
  arc A3 (67.556607, 19.743566) -> (77.522944, 29.323235) centre (85.545451, 11.002771) cw
  arc A4 (77.522944, 29.323235) -> (71.118535, 25.188537) centre (84.969685, 10.761283) ccw
  arc A5 (71.118535, 25.188537) -> (69.082243, 23.334729) centre (35.138331, 62.665248) cw
extrude "押し出し4" cut sketch "スケッチ4 outline for 押し出し4" against normal blind 10
fillet "フィレット3" radius 2 1 edges at (65.0619, -9.2433, 1.5)
properties part number "アンノーン前" material "アルミニウム 2014-T4"
